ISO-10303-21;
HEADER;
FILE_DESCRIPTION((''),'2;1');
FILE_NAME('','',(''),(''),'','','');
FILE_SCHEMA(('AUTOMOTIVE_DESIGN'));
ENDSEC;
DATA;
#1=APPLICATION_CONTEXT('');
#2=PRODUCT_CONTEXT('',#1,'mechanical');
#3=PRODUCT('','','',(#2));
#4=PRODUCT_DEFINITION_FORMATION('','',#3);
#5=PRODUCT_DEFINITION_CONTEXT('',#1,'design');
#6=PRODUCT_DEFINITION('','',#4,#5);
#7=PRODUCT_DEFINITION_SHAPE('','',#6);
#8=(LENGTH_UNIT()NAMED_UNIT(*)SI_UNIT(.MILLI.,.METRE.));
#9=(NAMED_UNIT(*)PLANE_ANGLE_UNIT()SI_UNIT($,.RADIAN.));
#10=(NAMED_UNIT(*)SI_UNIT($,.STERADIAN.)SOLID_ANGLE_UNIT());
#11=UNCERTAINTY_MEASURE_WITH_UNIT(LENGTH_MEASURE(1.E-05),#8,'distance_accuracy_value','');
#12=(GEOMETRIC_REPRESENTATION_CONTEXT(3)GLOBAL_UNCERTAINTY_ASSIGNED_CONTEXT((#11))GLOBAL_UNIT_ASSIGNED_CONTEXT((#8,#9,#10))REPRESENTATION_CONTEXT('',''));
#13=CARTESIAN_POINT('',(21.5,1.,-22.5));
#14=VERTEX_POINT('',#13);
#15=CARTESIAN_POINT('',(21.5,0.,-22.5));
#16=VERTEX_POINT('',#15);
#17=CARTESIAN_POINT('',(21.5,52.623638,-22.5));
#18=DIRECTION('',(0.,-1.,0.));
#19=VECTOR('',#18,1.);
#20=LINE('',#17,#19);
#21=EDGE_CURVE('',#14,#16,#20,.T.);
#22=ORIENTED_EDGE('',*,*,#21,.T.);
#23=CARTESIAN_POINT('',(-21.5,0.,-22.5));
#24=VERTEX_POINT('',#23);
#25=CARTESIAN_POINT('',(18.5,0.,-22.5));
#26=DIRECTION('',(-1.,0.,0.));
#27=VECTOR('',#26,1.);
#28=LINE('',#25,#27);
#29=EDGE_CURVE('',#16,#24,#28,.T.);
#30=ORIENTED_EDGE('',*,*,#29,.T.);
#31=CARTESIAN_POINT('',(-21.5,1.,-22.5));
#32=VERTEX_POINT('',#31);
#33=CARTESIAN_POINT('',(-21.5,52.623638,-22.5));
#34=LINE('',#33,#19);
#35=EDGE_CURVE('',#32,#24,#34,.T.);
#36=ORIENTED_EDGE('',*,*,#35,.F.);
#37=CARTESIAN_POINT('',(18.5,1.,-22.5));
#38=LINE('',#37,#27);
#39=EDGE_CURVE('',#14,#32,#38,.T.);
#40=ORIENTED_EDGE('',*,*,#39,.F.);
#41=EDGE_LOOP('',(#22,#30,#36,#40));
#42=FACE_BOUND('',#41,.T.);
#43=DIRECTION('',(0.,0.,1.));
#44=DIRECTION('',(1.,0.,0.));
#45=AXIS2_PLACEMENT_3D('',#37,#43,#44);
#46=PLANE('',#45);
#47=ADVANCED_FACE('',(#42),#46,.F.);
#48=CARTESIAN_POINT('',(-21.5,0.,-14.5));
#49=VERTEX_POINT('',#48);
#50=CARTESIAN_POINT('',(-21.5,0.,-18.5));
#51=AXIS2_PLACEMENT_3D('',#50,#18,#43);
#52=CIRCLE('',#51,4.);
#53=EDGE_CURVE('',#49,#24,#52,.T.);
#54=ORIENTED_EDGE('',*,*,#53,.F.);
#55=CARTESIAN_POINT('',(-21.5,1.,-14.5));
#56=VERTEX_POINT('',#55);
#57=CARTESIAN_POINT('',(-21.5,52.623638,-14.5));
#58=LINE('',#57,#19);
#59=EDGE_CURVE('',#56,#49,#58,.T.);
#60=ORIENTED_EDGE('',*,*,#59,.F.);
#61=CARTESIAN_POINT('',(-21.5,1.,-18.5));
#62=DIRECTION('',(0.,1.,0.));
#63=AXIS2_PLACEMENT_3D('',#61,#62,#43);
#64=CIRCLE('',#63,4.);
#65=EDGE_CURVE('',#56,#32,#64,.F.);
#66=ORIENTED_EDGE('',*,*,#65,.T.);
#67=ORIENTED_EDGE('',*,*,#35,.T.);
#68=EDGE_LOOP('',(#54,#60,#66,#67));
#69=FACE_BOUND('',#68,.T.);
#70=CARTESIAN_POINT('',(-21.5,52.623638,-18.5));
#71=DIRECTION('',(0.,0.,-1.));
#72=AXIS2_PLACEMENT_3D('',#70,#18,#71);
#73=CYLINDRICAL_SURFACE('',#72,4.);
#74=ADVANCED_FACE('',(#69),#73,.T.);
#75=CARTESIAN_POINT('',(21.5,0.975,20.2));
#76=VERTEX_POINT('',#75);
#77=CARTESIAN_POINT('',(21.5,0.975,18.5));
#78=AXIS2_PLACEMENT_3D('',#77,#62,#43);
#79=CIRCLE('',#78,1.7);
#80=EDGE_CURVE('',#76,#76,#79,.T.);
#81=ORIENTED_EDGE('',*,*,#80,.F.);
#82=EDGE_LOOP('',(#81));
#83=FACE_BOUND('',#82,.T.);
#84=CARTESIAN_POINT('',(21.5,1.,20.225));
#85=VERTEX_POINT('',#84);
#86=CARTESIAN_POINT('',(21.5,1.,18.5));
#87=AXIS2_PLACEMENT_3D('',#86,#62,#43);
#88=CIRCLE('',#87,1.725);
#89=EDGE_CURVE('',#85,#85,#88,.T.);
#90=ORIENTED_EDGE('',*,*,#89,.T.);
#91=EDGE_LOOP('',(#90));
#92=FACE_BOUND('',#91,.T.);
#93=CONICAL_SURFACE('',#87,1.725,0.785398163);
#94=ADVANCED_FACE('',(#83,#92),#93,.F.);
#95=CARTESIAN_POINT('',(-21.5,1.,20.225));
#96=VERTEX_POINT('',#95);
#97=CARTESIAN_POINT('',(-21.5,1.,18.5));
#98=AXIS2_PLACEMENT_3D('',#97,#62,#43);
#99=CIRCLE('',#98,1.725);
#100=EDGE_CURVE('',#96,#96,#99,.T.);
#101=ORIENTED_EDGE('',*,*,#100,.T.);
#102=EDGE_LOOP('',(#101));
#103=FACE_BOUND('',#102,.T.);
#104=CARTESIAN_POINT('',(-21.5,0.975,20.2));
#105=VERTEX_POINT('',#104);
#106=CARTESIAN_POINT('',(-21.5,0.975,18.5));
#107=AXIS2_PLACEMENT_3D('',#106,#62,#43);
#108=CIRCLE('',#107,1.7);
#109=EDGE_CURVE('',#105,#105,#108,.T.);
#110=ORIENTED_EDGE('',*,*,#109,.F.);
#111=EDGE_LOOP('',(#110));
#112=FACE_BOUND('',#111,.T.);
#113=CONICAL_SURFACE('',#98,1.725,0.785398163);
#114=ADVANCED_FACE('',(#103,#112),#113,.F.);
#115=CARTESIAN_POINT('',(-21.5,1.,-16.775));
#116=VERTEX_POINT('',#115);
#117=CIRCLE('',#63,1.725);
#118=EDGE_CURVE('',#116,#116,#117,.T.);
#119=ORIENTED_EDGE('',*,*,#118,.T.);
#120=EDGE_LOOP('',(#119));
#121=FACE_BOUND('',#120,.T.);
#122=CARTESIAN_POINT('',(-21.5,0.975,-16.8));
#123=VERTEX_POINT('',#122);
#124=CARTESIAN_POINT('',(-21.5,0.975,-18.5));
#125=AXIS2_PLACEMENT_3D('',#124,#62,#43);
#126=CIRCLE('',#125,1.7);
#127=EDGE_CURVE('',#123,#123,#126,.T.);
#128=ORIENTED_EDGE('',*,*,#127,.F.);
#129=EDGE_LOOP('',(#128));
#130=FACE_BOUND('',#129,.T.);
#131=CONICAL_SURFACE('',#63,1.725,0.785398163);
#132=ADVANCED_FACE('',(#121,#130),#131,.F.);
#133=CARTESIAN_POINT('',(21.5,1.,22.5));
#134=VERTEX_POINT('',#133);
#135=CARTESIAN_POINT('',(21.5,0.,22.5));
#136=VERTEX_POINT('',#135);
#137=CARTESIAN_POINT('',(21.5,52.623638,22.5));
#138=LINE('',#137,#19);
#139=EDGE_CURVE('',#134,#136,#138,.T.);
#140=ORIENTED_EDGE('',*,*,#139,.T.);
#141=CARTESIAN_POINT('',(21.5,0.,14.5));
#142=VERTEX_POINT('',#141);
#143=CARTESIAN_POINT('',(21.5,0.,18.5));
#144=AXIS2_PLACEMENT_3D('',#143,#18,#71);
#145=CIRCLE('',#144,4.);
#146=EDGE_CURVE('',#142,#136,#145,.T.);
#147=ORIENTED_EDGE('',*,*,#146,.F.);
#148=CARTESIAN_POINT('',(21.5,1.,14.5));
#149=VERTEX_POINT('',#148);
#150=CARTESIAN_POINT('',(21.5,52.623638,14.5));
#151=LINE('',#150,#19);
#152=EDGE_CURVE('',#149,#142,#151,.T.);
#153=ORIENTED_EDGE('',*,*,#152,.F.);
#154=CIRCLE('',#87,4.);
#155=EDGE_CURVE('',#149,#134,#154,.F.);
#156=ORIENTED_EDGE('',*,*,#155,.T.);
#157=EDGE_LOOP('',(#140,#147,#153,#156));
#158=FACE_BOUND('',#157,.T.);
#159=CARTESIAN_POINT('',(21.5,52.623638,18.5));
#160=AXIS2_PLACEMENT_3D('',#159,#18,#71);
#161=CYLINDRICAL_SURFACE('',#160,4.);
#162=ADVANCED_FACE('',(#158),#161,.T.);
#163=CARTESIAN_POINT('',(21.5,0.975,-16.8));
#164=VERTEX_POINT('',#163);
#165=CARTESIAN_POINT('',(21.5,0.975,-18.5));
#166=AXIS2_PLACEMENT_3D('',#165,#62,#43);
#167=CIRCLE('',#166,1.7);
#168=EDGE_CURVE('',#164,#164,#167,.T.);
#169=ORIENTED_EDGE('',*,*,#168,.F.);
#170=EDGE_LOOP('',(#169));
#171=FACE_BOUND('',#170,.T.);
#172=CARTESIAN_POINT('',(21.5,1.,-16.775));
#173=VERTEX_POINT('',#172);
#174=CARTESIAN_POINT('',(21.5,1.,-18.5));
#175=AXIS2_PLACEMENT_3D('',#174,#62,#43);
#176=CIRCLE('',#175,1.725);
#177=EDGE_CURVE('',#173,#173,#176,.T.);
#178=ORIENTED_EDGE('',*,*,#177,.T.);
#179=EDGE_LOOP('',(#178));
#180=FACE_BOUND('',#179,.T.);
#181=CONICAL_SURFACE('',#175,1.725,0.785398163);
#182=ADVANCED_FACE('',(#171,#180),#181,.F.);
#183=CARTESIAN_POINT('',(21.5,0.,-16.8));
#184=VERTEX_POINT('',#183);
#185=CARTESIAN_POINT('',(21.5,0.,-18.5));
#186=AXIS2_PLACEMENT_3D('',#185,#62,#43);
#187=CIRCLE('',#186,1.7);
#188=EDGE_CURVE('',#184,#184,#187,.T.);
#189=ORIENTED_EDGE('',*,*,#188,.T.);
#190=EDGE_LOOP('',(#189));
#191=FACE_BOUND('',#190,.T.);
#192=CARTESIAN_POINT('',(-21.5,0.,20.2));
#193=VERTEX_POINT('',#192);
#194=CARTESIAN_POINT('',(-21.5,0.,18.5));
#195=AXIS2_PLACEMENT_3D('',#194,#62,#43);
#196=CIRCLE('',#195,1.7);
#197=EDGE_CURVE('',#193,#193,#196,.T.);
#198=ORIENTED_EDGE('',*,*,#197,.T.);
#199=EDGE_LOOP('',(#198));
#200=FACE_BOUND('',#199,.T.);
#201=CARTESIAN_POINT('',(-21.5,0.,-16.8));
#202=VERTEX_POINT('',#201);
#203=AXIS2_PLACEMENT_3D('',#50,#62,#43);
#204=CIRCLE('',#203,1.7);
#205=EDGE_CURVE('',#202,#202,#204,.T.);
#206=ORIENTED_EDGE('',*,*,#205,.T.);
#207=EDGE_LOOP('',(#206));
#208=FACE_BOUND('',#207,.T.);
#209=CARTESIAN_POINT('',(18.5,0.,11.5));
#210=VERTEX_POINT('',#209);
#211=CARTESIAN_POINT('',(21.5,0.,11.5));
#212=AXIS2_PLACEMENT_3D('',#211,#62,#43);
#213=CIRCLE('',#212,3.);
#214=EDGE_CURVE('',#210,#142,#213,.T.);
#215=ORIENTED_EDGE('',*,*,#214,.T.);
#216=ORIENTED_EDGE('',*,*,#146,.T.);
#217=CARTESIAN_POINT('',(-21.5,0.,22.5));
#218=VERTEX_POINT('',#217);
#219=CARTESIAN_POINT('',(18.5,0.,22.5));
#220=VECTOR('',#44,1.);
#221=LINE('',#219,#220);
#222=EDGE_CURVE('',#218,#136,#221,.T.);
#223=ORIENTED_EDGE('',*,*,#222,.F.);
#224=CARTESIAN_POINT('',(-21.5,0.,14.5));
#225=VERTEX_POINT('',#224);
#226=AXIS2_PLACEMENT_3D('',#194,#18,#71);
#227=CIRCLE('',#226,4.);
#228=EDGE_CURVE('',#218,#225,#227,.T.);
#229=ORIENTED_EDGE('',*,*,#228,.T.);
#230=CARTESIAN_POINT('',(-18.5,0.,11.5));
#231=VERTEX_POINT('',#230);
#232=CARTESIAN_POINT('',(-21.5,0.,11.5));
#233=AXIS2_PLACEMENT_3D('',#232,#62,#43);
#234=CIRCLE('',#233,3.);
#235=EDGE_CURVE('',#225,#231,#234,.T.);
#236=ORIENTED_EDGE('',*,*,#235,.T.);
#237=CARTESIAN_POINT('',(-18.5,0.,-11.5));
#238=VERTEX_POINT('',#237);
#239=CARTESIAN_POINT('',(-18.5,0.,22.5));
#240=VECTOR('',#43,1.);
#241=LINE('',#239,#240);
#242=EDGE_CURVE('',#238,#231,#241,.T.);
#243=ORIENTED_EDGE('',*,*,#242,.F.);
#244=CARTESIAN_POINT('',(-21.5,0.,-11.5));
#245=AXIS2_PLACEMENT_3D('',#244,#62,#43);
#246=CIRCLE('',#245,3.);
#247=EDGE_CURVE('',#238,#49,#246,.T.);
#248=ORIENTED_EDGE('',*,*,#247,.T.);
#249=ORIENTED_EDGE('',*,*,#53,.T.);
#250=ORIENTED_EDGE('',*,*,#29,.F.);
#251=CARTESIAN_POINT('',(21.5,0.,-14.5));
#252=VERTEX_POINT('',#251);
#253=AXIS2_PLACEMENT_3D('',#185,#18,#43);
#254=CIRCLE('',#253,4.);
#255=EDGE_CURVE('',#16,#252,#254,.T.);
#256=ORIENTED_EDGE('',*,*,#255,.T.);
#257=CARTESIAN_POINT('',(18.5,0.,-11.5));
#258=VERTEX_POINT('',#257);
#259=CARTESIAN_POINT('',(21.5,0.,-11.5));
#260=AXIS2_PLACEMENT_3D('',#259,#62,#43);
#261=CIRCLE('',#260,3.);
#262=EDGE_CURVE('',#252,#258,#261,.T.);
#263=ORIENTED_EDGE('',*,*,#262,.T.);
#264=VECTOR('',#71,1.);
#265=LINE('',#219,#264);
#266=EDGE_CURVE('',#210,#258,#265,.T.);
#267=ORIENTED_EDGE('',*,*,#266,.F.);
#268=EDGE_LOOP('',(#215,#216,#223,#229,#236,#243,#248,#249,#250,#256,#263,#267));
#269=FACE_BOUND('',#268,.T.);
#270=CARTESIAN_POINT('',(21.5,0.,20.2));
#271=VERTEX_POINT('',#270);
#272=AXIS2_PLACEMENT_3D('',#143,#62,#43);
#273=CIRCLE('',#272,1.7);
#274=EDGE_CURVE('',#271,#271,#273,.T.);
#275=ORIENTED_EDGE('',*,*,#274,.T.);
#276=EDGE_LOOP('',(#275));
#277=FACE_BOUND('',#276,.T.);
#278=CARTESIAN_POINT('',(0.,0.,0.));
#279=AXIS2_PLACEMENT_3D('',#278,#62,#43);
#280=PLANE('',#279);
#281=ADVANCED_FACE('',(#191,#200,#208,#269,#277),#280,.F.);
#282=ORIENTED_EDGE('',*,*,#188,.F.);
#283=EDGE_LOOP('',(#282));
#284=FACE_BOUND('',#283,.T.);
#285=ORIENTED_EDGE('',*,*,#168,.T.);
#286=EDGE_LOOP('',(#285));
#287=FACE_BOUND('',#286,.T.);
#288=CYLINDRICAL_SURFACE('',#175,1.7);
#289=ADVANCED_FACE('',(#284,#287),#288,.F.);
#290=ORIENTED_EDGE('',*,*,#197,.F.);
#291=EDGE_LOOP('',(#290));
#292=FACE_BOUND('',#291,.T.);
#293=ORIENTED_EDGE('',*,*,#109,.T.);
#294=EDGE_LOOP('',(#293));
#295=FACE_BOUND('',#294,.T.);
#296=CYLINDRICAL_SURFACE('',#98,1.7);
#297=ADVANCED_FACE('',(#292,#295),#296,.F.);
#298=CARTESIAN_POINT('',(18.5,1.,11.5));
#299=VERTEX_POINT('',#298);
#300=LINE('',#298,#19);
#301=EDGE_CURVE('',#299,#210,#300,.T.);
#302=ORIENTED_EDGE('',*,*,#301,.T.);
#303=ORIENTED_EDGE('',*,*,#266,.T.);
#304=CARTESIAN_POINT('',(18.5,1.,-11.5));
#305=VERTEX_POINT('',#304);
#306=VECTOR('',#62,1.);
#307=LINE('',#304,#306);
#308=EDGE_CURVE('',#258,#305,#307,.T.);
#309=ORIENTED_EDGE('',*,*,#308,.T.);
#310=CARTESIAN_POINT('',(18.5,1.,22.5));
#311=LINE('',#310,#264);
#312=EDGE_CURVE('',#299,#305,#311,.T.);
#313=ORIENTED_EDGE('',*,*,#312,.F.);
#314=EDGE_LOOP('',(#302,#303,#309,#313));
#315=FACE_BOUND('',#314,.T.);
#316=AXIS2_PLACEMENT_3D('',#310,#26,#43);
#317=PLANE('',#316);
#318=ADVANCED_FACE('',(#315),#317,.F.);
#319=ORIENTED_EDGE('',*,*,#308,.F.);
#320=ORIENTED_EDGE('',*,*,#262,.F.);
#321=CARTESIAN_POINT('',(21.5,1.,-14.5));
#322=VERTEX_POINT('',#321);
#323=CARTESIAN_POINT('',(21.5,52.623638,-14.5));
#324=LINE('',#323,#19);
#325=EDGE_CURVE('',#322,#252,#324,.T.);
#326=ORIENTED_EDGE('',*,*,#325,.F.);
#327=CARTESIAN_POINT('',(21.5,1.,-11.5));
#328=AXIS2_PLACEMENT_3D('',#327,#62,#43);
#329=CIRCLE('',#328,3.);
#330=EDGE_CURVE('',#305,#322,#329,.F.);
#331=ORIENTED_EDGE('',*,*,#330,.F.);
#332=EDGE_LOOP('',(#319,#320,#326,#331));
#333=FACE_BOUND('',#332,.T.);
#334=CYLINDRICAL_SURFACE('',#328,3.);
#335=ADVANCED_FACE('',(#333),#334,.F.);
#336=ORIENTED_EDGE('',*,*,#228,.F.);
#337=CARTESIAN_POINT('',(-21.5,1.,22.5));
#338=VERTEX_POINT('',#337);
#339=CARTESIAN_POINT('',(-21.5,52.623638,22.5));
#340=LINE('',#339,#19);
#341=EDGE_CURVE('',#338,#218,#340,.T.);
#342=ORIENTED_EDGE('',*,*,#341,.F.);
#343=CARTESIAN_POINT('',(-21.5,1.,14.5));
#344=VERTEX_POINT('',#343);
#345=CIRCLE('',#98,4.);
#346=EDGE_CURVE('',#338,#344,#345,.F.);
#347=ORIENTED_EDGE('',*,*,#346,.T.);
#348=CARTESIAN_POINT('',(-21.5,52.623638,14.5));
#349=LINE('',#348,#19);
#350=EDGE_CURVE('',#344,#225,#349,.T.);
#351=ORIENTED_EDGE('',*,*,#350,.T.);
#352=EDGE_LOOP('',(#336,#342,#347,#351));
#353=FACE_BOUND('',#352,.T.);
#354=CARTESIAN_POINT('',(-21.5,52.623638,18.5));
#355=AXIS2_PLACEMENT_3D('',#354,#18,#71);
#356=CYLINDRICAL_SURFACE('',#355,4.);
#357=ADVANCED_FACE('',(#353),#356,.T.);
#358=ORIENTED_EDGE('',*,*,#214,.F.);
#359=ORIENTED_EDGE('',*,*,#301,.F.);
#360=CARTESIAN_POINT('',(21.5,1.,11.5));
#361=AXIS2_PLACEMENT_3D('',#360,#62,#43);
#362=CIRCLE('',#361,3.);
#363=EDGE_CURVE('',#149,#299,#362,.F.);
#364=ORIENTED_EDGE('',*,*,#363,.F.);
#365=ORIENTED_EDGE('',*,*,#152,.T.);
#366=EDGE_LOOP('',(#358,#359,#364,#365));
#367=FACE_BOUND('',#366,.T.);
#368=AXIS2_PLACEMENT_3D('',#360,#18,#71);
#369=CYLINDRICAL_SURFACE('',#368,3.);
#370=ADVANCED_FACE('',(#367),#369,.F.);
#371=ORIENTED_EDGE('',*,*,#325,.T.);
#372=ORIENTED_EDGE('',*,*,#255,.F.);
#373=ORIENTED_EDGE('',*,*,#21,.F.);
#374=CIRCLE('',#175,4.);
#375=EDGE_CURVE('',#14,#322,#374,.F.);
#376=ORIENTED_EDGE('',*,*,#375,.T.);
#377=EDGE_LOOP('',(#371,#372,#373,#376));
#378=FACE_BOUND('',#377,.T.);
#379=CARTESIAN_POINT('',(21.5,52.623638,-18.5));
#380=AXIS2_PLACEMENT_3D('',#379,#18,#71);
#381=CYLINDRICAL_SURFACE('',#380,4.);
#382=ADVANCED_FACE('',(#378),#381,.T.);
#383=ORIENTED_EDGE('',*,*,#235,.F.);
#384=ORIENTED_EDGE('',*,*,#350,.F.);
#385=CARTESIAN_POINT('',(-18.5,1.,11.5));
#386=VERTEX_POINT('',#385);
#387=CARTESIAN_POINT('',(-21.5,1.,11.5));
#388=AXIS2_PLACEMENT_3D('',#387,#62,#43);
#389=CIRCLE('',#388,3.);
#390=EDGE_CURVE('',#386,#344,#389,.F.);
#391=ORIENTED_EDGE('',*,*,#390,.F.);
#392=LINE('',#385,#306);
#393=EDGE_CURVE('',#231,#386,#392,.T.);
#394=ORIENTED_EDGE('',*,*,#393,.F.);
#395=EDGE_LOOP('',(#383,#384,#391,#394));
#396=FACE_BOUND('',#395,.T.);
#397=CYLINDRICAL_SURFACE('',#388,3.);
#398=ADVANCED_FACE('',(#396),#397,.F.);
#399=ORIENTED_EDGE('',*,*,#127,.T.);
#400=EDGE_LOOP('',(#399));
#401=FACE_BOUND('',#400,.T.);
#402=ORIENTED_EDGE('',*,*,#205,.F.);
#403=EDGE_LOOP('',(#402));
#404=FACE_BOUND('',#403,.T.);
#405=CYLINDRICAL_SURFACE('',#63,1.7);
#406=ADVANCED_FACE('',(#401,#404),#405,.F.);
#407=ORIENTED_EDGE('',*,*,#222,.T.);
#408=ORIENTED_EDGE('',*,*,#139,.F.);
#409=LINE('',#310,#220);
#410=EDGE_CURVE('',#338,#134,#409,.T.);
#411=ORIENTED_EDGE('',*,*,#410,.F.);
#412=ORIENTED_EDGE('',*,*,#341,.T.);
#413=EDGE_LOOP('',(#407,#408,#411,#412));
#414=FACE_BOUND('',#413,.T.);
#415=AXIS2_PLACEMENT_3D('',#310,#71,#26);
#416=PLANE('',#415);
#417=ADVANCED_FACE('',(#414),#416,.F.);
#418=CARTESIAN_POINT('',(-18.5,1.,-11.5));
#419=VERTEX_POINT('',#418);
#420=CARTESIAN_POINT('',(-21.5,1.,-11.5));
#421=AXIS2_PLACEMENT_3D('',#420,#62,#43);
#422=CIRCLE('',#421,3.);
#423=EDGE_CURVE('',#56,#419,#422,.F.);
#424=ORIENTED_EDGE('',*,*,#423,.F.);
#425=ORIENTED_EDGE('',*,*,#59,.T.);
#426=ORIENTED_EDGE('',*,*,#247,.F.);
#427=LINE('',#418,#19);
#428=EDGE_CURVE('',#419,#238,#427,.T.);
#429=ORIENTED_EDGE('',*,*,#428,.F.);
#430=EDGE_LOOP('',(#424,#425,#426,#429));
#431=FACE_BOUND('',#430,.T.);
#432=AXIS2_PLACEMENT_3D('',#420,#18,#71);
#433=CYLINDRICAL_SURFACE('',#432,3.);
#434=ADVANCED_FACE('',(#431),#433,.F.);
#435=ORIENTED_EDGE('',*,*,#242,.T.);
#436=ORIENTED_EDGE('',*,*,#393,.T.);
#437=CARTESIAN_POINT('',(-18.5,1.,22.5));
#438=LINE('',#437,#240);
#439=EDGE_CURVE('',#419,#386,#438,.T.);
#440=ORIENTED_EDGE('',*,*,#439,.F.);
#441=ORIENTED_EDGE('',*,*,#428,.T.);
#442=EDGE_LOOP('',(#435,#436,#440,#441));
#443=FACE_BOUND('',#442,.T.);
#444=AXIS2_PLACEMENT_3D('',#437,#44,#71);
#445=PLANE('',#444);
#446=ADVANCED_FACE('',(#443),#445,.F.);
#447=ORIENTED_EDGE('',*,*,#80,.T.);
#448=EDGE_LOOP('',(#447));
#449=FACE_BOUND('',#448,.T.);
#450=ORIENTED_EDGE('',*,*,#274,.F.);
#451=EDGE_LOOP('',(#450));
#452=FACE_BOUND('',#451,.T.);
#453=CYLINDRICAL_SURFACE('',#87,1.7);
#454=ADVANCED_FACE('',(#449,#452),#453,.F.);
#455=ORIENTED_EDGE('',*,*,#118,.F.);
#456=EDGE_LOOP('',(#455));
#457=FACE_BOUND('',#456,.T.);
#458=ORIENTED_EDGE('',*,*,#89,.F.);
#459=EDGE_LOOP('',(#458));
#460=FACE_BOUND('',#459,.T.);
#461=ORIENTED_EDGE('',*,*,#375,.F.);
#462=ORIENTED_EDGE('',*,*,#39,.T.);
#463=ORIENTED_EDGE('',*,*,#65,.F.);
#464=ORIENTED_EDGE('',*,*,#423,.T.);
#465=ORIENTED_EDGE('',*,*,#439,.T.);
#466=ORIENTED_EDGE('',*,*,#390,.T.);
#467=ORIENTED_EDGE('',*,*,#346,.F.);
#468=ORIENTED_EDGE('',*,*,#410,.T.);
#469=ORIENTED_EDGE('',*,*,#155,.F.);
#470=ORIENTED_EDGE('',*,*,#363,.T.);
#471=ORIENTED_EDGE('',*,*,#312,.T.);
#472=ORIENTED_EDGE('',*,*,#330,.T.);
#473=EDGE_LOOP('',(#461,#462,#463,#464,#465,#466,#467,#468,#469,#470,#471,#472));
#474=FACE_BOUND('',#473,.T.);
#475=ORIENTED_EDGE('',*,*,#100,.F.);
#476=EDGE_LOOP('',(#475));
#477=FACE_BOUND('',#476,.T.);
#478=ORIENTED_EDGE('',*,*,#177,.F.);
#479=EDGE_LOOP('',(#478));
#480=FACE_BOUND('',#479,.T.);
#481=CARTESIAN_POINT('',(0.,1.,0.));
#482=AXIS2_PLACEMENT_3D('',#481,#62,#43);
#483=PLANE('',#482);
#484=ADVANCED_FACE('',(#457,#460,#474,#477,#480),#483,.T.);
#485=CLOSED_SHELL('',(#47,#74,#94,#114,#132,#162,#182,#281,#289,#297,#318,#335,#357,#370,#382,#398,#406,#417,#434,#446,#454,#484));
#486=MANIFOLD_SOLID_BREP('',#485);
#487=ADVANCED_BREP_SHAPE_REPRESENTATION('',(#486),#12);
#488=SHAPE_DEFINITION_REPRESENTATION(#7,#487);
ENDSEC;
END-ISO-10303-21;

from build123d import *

# Parameters (mm, degrees)
SKETCH1_W                     = 37
SKETCH1_H                     = 45
BOSS_EXTRUDE1_DEPTH           = 1
BOSS_EXTRUDE2_DEPTH           = 1
FILLET1_R                     = 3
M3_CLEARANCE_HOLE1_AT_2_COUNT = 2
M3_CLEARANCE_HOLE1_AT_2_PITCH = 37
M3_CLEARANCE_HOLE1_AT_3_COUNT = 2
M3_CLEARANCE_HOLE1_AT_3_PITCH = 56.727418415
M3_CLEARANCE_HOLE1_AT_4_COUNT = 2
M3_CLEARANCE_HOLE1_AT_4_PITCH = 43


with BuildPart() as part:
    # Sketch1 → Boss-Extrude1 (new body)
    with BuildSketch(Plane(origin=(0, 0, 0), x_dir=(1, 0, 0), z_dir=(0, 1, 0))):
        Rectangle(SKETCH1_W, SKETCH1_H)
    extrude(amount=BOSS_EXTRUDE1_DEPTH)

    # Sketch2 → Boss-Extrude2 (add)
    with BuildSketch(Plane.XZ):
        with BuildLine():
            Line((21.5, 14.5), (-21.5, 14.5))
            ThreePointArc((-21.5, 14.5), (-25.5, 18.5), (-21.5, 22.5))
            Line((-21.5, 22.5), (21.5, 22.5))
            ThreePointArc((21.5, 22.5), (25.5, 18.5), (21.5, 14.5))
        make_face()
        with BuildLine():
            Line((21.5, -14.5), (-21.5, -14.5))
            ThreePointArc((-21.5, -14.5), (-25.5, -18.5), (-21.5, -22.5))
            Line((-21.5, -22.5), (21.5, -22.5))
            ThreePointArc((21.5, -22.5), (25.5, -18.5), (21.5, -14.5))
        make_face()
    extrude(amount=-BOSS_EXTRUDE2_DEPTH)

    # Fillet1
    fillet1_edges = [part.edges().sort_by_distance(p)[0] for p in [
        (-18.5, 0.5, 14.5),
        (-18.5, 0.5, -14.5),
        (18.5, 0.5, -14.5),
        (18.5, 0.5, 14.5),
    ]]
    fillet(fillet1_edges, radius=FILLET1_R - 0.0001)  # a hair under: the kernel refuses the full size

    # Sketch5 → M3 Clearance Hole1 (revolve, cut)
    with BuildSketch(Plane(origin=(-21.5, 1, -18.5), x_dir=(0, 0, 1), z_dir=(1, 0, 0))):
        Polygon((0, 0), (0, 1), (1.7, 1), (1.7, 0.025), (1.725, 0), align=None)
    m3_clearance_hole1 = revolve(axis=Axis((-21.5, 7.35, -18.5), (0, -1, 0)), mode=Mode.SUBTRACT)

    # M3 Clearance Hole1 at 2: M3 Clearance Hole1 ×2
    with Locations(*[(0, 0, i * M3_CLEARANCE_HOLE1_AT_2_PITCH) for i in range(1, M3_CLEARANCE_HOLE1_AT_2_COUNT)]):
        add(m3_clearance_hole1, mode=Mode.SUBTRACT)

    # M3 Clearance Hole1 at 3: M3 Clearance Hole1 ×2
    with Locations(*[Vector(0.7580108737829233, 0, 0.6522419146504225) * (i * M3_CLEARANCE_HOLE1_AT_3_PITCH) for i in range(1, M3_CLEARANCE_HOLE1_AT_3_COUNT)]):
        add(m3_clearance_hole1, mode=Mode.SUBTRACT)

    # M3 Clearance Hole1 at 4: M3 Clearance Hole1 ×2
    with Locations(*[(i * M3_CLEARANCE_HOLE1_AT_4_PITCH, 0, 0) for i in range(1, M3_CLEARANCE_HOLE1_AT_4_COUNT)]):
        add(m3_clearance_hole1, mode=Mode.SUBTRACT)


solid = part.part
